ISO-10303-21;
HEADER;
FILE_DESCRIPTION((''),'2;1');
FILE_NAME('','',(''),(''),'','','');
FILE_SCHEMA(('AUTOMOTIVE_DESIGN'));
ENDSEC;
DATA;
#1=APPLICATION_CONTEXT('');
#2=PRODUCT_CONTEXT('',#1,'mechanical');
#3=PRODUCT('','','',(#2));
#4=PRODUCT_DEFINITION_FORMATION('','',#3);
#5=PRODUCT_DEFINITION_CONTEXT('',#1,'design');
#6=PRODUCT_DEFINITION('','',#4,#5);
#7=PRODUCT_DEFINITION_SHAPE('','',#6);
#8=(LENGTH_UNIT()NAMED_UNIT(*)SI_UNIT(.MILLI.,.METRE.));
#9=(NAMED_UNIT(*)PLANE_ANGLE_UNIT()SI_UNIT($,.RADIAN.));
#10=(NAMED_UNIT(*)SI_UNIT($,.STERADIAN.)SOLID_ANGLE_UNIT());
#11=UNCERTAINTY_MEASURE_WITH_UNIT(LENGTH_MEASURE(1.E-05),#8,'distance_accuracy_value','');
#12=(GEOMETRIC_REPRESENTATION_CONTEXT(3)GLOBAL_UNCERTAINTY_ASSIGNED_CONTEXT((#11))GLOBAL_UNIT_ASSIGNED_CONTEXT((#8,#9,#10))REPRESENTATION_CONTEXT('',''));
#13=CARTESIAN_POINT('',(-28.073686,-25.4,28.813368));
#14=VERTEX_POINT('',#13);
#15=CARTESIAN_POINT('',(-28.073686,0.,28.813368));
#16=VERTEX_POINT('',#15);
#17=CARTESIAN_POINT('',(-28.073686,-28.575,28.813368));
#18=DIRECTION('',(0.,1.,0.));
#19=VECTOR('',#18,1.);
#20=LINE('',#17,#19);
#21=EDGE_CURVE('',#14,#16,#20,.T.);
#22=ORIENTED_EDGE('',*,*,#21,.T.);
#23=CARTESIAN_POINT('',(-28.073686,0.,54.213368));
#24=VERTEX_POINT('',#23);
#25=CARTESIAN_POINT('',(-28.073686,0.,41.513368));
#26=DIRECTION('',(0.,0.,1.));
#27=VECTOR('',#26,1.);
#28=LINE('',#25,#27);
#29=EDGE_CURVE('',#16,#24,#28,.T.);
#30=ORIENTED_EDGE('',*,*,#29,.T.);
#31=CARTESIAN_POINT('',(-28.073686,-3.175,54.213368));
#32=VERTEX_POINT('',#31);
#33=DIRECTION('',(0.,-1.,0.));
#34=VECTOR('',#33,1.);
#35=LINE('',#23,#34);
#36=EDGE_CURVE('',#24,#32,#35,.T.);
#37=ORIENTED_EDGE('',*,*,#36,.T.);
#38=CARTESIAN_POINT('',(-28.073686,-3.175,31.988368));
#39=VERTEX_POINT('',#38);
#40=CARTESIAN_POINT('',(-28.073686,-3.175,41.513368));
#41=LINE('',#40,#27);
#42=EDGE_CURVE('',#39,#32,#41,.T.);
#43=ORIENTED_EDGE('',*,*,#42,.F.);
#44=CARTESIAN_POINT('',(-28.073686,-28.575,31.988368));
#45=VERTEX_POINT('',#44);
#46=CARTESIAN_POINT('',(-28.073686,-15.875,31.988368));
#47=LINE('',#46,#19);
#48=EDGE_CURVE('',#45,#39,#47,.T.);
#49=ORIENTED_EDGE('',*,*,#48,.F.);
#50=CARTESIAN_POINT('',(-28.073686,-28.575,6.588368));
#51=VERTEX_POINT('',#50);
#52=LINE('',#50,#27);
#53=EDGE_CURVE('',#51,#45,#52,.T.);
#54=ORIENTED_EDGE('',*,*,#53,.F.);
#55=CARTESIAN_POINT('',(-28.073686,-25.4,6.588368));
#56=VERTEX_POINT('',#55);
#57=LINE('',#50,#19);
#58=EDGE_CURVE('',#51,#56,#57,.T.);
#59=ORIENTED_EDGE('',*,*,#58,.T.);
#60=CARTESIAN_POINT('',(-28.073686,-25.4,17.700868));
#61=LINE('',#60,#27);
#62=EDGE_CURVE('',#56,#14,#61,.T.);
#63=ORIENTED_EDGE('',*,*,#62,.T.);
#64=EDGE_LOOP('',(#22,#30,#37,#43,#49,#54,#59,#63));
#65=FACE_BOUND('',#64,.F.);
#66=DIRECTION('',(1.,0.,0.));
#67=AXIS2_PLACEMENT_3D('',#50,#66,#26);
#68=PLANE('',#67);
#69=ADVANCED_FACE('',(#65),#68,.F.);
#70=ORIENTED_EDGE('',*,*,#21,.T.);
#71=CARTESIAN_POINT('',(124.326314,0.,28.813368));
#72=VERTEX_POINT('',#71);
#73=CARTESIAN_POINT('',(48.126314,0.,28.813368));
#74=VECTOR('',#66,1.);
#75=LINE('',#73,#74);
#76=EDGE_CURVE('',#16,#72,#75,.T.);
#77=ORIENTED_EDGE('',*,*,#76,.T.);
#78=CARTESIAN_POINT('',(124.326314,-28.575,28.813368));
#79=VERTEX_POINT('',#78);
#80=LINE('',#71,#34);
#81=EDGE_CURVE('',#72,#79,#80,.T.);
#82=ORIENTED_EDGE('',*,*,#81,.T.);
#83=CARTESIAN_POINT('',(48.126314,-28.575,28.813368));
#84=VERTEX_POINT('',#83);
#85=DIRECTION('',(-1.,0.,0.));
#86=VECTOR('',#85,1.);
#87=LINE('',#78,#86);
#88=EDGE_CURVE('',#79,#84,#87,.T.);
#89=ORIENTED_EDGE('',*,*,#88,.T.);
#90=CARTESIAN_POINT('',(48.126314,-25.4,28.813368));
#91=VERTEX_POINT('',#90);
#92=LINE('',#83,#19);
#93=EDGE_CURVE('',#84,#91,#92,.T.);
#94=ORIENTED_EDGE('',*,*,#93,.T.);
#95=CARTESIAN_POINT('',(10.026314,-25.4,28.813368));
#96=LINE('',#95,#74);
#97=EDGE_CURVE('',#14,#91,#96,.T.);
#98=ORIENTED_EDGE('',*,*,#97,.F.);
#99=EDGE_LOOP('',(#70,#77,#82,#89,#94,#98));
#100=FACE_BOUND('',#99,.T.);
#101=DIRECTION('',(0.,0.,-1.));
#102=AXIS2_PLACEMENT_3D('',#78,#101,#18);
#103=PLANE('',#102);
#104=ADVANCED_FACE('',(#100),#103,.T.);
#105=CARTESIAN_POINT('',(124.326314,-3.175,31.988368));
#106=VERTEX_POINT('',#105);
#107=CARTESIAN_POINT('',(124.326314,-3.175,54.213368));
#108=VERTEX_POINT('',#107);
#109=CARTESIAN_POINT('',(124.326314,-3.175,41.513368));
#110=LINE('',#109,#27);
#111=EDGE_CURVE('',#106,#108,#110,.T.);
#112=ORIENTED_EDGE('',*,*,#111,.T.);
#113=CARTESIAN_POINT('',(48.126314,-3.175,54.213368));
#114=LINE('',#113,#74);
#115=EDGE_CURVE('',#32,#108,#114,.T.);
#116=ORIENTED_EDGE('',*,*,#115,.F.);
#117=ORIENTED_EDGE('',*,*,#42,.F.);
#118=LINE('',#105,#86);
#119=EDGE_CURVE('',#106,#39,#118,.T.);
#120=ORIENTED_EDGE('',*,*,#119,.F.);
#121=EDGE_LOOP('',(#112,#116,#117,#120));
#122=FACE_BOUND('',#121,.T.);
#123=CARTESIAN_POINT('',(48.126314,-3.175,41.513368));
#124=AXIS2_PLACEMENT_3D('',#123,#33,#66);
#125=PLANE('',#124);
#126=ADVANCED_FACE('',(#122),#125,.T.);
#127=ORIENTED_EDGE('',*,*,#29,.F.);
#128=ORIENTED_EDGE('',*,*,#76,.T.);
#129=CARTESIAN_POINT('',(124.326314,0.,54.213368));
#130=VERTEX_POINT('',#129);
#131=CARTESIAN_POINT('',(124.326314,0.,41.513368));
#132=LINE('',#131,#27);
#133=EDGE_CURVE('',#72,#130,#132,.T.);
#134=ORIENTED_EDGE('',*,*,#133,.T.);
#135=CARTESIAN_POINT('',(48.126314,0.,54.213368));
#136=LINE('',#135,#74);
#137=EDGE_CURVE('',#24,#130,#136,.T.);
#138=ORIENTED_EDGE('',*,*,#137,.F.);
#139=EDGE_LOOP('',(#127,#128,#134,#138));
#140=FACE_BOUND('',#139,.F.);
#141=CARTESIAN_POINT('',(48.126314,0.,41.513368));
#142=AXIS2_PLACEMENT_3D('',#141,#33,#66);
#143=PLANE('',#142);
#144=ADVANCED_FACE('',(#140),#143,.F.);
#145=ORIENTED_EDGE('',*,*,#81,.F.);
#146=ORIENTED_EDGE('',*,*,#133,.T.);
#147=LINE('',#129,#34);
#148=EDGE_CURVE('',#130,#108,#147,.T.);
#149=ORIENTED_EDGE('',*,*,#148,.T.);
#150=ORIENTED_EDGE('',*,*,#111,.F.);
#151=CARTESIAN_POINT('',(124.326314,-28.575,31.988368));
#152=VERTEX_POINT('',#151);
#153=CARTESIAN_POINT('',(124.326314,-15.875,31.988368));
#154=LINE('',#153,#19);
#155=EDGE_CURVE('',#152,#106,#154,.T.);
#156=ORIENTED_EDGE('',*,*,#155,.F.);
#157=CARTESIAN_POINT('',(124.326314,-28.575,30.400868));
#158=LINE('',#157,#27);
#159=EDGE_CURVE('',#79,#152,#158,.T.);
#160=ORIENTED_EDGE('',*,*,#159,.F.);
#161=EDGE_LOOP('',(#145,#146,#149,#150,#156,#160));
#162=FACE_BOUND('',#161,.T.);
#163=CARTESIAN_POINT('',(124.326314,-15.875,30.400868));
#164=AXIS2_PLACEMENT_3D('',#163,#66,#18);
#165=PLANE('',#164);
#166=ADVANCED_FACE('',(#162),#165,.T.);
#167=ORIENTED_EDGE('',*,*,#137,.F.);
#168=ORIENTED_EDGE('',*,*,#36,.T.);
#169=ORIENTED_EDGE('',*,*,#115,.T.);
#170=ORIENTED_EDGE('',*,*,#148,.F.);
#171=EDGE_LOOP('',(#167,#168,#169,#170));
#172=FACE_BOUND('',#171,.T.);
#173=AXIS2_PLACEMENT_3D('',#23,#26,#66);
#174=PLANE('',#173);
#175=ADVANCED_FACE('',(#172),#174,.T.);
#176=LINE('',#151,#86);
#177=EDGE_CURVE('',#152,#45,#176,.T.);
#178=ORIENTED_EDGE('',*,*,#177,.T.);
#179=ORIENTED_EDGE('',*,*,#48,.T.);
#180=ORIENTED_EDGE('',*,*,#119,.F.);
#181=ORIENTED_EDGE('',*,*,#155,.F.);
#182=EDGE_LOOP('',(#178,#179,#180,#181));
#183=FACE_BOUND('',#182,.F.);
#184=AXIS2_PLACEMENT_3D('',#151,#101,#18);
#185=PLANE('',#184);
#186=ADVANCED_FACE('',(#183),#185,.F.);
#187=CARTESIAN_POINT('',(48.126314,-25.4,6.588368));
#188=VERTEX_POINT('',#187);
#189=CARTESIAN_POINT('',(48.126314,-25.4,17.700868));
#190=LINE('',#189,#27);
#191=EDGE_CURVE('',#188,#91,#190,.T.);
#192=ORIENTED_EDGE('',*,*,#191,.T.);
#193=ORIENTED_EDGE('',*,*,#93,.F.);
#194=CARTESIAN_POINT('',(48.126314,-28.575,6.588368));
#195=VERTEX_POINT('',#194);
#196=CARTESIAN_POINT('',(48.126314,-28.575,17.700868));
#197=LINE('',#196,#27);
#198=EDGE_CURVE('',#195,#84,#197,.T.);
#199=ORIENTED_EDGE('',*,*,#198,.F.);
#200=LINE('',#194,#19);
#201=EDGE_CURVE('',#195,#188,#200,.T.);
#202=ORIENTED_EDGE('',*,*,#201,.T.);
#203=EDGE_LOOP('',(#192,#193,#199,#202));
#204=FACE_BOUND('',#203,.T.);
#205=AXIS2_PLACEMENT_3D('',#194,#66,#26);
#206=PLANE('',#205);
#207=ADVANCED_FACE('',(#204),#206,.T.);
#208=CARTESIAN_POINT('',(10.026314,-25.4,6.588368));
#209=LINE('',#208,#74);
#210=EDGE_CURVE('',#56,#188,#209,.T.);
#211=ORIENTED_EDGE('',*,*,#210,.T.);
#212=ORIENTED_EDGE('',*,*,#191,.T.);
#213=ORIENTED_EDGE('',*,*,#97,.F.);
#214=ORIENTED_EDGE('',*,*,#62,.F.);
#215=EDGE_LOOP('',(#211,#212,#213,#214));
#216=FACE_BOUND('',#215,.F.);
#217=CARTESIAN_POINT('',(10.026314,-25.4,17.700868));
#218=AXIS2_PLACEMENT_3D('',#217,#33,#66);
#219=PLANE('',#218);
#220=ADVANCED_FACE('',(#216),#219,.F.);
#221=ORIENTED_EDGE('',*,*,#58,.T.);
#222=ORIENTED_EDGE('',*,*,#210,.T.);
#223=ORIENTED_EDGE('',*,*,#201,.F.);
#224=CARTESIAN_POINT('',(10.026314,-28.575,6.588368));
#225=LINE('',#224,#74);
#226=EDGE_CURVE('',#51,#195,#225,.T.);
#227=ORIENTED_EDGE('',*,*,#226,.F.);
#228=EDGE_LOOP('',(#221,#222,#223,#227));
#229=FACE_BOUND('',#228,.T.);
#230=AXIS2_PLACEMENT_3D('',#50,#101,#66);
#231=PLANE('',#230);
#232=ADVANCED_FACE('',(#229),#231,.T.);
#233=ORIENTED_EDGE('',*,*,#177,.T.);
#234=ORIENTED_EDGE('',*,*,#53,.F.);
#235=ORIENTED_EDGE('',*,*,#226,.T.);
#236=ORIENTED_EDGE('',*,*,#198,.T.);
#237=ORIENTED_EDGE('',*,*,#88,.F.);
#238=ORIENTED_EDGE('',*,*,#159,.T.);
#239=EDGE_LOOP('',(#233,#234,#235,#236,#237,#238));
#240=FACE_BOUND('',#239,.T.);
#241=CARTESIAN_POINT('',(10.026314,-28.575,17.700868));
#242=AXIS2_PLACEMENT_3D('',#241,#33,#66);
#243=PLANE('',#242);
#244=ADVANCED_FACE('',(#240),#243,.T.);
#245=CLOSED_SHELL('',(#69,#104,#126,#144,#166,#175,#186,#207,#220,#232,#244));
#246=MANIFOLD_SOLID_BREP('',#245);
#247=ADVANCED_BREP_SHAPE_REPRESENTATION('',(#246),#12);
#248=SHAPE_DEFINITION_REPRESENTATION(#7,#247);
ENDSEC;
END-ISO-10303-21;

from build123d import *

# Parameters (mm, degrees)
F0_W     = 152.4
F0_H     = 25.4
F1_DEPTH = 3.175
F2_W     = 25.4
F2_H     = 3.175
F3_DEPTH = 152.4
F4_W     = 76.2
F4_H     = 22.225
F5_DEPTH = 3.175


# Not quite as in the source:
# - a length typed as a fraction of an inch, garbled in the dataset ("3 / 203.2 mm" for 3/8 in), is restored


with BuildPart() as f1:
    # F0 (on Front) → F1 (new body)
    with BuildSketch(Plane.XZ):
        with Locations((48.1263138257, 41.5133684874)):
            Rectangle(F0_W, F0_H)
    extrude(amount=F1_DEPTH)

    # F2 (on face) → F3 (join)
    with BuildSketch(Plane.YZ.offset(124.3263138257)):
        with Locations((-15.875, 30.4008684874)):
            Rectangle(F2_W, F2_H)
    extrude(amount=-F3_DEPTH)

    # F4 (on face) → F5 (join)
    with BuildSketch(Plane.XZ.offset(28.575)):
        with Locations((10.0263138257, 17.7008684874)):
            Rectangle(F4_W, F4_H)
    extrude(amount=-F5_DEPTH)


solid = f1.part
